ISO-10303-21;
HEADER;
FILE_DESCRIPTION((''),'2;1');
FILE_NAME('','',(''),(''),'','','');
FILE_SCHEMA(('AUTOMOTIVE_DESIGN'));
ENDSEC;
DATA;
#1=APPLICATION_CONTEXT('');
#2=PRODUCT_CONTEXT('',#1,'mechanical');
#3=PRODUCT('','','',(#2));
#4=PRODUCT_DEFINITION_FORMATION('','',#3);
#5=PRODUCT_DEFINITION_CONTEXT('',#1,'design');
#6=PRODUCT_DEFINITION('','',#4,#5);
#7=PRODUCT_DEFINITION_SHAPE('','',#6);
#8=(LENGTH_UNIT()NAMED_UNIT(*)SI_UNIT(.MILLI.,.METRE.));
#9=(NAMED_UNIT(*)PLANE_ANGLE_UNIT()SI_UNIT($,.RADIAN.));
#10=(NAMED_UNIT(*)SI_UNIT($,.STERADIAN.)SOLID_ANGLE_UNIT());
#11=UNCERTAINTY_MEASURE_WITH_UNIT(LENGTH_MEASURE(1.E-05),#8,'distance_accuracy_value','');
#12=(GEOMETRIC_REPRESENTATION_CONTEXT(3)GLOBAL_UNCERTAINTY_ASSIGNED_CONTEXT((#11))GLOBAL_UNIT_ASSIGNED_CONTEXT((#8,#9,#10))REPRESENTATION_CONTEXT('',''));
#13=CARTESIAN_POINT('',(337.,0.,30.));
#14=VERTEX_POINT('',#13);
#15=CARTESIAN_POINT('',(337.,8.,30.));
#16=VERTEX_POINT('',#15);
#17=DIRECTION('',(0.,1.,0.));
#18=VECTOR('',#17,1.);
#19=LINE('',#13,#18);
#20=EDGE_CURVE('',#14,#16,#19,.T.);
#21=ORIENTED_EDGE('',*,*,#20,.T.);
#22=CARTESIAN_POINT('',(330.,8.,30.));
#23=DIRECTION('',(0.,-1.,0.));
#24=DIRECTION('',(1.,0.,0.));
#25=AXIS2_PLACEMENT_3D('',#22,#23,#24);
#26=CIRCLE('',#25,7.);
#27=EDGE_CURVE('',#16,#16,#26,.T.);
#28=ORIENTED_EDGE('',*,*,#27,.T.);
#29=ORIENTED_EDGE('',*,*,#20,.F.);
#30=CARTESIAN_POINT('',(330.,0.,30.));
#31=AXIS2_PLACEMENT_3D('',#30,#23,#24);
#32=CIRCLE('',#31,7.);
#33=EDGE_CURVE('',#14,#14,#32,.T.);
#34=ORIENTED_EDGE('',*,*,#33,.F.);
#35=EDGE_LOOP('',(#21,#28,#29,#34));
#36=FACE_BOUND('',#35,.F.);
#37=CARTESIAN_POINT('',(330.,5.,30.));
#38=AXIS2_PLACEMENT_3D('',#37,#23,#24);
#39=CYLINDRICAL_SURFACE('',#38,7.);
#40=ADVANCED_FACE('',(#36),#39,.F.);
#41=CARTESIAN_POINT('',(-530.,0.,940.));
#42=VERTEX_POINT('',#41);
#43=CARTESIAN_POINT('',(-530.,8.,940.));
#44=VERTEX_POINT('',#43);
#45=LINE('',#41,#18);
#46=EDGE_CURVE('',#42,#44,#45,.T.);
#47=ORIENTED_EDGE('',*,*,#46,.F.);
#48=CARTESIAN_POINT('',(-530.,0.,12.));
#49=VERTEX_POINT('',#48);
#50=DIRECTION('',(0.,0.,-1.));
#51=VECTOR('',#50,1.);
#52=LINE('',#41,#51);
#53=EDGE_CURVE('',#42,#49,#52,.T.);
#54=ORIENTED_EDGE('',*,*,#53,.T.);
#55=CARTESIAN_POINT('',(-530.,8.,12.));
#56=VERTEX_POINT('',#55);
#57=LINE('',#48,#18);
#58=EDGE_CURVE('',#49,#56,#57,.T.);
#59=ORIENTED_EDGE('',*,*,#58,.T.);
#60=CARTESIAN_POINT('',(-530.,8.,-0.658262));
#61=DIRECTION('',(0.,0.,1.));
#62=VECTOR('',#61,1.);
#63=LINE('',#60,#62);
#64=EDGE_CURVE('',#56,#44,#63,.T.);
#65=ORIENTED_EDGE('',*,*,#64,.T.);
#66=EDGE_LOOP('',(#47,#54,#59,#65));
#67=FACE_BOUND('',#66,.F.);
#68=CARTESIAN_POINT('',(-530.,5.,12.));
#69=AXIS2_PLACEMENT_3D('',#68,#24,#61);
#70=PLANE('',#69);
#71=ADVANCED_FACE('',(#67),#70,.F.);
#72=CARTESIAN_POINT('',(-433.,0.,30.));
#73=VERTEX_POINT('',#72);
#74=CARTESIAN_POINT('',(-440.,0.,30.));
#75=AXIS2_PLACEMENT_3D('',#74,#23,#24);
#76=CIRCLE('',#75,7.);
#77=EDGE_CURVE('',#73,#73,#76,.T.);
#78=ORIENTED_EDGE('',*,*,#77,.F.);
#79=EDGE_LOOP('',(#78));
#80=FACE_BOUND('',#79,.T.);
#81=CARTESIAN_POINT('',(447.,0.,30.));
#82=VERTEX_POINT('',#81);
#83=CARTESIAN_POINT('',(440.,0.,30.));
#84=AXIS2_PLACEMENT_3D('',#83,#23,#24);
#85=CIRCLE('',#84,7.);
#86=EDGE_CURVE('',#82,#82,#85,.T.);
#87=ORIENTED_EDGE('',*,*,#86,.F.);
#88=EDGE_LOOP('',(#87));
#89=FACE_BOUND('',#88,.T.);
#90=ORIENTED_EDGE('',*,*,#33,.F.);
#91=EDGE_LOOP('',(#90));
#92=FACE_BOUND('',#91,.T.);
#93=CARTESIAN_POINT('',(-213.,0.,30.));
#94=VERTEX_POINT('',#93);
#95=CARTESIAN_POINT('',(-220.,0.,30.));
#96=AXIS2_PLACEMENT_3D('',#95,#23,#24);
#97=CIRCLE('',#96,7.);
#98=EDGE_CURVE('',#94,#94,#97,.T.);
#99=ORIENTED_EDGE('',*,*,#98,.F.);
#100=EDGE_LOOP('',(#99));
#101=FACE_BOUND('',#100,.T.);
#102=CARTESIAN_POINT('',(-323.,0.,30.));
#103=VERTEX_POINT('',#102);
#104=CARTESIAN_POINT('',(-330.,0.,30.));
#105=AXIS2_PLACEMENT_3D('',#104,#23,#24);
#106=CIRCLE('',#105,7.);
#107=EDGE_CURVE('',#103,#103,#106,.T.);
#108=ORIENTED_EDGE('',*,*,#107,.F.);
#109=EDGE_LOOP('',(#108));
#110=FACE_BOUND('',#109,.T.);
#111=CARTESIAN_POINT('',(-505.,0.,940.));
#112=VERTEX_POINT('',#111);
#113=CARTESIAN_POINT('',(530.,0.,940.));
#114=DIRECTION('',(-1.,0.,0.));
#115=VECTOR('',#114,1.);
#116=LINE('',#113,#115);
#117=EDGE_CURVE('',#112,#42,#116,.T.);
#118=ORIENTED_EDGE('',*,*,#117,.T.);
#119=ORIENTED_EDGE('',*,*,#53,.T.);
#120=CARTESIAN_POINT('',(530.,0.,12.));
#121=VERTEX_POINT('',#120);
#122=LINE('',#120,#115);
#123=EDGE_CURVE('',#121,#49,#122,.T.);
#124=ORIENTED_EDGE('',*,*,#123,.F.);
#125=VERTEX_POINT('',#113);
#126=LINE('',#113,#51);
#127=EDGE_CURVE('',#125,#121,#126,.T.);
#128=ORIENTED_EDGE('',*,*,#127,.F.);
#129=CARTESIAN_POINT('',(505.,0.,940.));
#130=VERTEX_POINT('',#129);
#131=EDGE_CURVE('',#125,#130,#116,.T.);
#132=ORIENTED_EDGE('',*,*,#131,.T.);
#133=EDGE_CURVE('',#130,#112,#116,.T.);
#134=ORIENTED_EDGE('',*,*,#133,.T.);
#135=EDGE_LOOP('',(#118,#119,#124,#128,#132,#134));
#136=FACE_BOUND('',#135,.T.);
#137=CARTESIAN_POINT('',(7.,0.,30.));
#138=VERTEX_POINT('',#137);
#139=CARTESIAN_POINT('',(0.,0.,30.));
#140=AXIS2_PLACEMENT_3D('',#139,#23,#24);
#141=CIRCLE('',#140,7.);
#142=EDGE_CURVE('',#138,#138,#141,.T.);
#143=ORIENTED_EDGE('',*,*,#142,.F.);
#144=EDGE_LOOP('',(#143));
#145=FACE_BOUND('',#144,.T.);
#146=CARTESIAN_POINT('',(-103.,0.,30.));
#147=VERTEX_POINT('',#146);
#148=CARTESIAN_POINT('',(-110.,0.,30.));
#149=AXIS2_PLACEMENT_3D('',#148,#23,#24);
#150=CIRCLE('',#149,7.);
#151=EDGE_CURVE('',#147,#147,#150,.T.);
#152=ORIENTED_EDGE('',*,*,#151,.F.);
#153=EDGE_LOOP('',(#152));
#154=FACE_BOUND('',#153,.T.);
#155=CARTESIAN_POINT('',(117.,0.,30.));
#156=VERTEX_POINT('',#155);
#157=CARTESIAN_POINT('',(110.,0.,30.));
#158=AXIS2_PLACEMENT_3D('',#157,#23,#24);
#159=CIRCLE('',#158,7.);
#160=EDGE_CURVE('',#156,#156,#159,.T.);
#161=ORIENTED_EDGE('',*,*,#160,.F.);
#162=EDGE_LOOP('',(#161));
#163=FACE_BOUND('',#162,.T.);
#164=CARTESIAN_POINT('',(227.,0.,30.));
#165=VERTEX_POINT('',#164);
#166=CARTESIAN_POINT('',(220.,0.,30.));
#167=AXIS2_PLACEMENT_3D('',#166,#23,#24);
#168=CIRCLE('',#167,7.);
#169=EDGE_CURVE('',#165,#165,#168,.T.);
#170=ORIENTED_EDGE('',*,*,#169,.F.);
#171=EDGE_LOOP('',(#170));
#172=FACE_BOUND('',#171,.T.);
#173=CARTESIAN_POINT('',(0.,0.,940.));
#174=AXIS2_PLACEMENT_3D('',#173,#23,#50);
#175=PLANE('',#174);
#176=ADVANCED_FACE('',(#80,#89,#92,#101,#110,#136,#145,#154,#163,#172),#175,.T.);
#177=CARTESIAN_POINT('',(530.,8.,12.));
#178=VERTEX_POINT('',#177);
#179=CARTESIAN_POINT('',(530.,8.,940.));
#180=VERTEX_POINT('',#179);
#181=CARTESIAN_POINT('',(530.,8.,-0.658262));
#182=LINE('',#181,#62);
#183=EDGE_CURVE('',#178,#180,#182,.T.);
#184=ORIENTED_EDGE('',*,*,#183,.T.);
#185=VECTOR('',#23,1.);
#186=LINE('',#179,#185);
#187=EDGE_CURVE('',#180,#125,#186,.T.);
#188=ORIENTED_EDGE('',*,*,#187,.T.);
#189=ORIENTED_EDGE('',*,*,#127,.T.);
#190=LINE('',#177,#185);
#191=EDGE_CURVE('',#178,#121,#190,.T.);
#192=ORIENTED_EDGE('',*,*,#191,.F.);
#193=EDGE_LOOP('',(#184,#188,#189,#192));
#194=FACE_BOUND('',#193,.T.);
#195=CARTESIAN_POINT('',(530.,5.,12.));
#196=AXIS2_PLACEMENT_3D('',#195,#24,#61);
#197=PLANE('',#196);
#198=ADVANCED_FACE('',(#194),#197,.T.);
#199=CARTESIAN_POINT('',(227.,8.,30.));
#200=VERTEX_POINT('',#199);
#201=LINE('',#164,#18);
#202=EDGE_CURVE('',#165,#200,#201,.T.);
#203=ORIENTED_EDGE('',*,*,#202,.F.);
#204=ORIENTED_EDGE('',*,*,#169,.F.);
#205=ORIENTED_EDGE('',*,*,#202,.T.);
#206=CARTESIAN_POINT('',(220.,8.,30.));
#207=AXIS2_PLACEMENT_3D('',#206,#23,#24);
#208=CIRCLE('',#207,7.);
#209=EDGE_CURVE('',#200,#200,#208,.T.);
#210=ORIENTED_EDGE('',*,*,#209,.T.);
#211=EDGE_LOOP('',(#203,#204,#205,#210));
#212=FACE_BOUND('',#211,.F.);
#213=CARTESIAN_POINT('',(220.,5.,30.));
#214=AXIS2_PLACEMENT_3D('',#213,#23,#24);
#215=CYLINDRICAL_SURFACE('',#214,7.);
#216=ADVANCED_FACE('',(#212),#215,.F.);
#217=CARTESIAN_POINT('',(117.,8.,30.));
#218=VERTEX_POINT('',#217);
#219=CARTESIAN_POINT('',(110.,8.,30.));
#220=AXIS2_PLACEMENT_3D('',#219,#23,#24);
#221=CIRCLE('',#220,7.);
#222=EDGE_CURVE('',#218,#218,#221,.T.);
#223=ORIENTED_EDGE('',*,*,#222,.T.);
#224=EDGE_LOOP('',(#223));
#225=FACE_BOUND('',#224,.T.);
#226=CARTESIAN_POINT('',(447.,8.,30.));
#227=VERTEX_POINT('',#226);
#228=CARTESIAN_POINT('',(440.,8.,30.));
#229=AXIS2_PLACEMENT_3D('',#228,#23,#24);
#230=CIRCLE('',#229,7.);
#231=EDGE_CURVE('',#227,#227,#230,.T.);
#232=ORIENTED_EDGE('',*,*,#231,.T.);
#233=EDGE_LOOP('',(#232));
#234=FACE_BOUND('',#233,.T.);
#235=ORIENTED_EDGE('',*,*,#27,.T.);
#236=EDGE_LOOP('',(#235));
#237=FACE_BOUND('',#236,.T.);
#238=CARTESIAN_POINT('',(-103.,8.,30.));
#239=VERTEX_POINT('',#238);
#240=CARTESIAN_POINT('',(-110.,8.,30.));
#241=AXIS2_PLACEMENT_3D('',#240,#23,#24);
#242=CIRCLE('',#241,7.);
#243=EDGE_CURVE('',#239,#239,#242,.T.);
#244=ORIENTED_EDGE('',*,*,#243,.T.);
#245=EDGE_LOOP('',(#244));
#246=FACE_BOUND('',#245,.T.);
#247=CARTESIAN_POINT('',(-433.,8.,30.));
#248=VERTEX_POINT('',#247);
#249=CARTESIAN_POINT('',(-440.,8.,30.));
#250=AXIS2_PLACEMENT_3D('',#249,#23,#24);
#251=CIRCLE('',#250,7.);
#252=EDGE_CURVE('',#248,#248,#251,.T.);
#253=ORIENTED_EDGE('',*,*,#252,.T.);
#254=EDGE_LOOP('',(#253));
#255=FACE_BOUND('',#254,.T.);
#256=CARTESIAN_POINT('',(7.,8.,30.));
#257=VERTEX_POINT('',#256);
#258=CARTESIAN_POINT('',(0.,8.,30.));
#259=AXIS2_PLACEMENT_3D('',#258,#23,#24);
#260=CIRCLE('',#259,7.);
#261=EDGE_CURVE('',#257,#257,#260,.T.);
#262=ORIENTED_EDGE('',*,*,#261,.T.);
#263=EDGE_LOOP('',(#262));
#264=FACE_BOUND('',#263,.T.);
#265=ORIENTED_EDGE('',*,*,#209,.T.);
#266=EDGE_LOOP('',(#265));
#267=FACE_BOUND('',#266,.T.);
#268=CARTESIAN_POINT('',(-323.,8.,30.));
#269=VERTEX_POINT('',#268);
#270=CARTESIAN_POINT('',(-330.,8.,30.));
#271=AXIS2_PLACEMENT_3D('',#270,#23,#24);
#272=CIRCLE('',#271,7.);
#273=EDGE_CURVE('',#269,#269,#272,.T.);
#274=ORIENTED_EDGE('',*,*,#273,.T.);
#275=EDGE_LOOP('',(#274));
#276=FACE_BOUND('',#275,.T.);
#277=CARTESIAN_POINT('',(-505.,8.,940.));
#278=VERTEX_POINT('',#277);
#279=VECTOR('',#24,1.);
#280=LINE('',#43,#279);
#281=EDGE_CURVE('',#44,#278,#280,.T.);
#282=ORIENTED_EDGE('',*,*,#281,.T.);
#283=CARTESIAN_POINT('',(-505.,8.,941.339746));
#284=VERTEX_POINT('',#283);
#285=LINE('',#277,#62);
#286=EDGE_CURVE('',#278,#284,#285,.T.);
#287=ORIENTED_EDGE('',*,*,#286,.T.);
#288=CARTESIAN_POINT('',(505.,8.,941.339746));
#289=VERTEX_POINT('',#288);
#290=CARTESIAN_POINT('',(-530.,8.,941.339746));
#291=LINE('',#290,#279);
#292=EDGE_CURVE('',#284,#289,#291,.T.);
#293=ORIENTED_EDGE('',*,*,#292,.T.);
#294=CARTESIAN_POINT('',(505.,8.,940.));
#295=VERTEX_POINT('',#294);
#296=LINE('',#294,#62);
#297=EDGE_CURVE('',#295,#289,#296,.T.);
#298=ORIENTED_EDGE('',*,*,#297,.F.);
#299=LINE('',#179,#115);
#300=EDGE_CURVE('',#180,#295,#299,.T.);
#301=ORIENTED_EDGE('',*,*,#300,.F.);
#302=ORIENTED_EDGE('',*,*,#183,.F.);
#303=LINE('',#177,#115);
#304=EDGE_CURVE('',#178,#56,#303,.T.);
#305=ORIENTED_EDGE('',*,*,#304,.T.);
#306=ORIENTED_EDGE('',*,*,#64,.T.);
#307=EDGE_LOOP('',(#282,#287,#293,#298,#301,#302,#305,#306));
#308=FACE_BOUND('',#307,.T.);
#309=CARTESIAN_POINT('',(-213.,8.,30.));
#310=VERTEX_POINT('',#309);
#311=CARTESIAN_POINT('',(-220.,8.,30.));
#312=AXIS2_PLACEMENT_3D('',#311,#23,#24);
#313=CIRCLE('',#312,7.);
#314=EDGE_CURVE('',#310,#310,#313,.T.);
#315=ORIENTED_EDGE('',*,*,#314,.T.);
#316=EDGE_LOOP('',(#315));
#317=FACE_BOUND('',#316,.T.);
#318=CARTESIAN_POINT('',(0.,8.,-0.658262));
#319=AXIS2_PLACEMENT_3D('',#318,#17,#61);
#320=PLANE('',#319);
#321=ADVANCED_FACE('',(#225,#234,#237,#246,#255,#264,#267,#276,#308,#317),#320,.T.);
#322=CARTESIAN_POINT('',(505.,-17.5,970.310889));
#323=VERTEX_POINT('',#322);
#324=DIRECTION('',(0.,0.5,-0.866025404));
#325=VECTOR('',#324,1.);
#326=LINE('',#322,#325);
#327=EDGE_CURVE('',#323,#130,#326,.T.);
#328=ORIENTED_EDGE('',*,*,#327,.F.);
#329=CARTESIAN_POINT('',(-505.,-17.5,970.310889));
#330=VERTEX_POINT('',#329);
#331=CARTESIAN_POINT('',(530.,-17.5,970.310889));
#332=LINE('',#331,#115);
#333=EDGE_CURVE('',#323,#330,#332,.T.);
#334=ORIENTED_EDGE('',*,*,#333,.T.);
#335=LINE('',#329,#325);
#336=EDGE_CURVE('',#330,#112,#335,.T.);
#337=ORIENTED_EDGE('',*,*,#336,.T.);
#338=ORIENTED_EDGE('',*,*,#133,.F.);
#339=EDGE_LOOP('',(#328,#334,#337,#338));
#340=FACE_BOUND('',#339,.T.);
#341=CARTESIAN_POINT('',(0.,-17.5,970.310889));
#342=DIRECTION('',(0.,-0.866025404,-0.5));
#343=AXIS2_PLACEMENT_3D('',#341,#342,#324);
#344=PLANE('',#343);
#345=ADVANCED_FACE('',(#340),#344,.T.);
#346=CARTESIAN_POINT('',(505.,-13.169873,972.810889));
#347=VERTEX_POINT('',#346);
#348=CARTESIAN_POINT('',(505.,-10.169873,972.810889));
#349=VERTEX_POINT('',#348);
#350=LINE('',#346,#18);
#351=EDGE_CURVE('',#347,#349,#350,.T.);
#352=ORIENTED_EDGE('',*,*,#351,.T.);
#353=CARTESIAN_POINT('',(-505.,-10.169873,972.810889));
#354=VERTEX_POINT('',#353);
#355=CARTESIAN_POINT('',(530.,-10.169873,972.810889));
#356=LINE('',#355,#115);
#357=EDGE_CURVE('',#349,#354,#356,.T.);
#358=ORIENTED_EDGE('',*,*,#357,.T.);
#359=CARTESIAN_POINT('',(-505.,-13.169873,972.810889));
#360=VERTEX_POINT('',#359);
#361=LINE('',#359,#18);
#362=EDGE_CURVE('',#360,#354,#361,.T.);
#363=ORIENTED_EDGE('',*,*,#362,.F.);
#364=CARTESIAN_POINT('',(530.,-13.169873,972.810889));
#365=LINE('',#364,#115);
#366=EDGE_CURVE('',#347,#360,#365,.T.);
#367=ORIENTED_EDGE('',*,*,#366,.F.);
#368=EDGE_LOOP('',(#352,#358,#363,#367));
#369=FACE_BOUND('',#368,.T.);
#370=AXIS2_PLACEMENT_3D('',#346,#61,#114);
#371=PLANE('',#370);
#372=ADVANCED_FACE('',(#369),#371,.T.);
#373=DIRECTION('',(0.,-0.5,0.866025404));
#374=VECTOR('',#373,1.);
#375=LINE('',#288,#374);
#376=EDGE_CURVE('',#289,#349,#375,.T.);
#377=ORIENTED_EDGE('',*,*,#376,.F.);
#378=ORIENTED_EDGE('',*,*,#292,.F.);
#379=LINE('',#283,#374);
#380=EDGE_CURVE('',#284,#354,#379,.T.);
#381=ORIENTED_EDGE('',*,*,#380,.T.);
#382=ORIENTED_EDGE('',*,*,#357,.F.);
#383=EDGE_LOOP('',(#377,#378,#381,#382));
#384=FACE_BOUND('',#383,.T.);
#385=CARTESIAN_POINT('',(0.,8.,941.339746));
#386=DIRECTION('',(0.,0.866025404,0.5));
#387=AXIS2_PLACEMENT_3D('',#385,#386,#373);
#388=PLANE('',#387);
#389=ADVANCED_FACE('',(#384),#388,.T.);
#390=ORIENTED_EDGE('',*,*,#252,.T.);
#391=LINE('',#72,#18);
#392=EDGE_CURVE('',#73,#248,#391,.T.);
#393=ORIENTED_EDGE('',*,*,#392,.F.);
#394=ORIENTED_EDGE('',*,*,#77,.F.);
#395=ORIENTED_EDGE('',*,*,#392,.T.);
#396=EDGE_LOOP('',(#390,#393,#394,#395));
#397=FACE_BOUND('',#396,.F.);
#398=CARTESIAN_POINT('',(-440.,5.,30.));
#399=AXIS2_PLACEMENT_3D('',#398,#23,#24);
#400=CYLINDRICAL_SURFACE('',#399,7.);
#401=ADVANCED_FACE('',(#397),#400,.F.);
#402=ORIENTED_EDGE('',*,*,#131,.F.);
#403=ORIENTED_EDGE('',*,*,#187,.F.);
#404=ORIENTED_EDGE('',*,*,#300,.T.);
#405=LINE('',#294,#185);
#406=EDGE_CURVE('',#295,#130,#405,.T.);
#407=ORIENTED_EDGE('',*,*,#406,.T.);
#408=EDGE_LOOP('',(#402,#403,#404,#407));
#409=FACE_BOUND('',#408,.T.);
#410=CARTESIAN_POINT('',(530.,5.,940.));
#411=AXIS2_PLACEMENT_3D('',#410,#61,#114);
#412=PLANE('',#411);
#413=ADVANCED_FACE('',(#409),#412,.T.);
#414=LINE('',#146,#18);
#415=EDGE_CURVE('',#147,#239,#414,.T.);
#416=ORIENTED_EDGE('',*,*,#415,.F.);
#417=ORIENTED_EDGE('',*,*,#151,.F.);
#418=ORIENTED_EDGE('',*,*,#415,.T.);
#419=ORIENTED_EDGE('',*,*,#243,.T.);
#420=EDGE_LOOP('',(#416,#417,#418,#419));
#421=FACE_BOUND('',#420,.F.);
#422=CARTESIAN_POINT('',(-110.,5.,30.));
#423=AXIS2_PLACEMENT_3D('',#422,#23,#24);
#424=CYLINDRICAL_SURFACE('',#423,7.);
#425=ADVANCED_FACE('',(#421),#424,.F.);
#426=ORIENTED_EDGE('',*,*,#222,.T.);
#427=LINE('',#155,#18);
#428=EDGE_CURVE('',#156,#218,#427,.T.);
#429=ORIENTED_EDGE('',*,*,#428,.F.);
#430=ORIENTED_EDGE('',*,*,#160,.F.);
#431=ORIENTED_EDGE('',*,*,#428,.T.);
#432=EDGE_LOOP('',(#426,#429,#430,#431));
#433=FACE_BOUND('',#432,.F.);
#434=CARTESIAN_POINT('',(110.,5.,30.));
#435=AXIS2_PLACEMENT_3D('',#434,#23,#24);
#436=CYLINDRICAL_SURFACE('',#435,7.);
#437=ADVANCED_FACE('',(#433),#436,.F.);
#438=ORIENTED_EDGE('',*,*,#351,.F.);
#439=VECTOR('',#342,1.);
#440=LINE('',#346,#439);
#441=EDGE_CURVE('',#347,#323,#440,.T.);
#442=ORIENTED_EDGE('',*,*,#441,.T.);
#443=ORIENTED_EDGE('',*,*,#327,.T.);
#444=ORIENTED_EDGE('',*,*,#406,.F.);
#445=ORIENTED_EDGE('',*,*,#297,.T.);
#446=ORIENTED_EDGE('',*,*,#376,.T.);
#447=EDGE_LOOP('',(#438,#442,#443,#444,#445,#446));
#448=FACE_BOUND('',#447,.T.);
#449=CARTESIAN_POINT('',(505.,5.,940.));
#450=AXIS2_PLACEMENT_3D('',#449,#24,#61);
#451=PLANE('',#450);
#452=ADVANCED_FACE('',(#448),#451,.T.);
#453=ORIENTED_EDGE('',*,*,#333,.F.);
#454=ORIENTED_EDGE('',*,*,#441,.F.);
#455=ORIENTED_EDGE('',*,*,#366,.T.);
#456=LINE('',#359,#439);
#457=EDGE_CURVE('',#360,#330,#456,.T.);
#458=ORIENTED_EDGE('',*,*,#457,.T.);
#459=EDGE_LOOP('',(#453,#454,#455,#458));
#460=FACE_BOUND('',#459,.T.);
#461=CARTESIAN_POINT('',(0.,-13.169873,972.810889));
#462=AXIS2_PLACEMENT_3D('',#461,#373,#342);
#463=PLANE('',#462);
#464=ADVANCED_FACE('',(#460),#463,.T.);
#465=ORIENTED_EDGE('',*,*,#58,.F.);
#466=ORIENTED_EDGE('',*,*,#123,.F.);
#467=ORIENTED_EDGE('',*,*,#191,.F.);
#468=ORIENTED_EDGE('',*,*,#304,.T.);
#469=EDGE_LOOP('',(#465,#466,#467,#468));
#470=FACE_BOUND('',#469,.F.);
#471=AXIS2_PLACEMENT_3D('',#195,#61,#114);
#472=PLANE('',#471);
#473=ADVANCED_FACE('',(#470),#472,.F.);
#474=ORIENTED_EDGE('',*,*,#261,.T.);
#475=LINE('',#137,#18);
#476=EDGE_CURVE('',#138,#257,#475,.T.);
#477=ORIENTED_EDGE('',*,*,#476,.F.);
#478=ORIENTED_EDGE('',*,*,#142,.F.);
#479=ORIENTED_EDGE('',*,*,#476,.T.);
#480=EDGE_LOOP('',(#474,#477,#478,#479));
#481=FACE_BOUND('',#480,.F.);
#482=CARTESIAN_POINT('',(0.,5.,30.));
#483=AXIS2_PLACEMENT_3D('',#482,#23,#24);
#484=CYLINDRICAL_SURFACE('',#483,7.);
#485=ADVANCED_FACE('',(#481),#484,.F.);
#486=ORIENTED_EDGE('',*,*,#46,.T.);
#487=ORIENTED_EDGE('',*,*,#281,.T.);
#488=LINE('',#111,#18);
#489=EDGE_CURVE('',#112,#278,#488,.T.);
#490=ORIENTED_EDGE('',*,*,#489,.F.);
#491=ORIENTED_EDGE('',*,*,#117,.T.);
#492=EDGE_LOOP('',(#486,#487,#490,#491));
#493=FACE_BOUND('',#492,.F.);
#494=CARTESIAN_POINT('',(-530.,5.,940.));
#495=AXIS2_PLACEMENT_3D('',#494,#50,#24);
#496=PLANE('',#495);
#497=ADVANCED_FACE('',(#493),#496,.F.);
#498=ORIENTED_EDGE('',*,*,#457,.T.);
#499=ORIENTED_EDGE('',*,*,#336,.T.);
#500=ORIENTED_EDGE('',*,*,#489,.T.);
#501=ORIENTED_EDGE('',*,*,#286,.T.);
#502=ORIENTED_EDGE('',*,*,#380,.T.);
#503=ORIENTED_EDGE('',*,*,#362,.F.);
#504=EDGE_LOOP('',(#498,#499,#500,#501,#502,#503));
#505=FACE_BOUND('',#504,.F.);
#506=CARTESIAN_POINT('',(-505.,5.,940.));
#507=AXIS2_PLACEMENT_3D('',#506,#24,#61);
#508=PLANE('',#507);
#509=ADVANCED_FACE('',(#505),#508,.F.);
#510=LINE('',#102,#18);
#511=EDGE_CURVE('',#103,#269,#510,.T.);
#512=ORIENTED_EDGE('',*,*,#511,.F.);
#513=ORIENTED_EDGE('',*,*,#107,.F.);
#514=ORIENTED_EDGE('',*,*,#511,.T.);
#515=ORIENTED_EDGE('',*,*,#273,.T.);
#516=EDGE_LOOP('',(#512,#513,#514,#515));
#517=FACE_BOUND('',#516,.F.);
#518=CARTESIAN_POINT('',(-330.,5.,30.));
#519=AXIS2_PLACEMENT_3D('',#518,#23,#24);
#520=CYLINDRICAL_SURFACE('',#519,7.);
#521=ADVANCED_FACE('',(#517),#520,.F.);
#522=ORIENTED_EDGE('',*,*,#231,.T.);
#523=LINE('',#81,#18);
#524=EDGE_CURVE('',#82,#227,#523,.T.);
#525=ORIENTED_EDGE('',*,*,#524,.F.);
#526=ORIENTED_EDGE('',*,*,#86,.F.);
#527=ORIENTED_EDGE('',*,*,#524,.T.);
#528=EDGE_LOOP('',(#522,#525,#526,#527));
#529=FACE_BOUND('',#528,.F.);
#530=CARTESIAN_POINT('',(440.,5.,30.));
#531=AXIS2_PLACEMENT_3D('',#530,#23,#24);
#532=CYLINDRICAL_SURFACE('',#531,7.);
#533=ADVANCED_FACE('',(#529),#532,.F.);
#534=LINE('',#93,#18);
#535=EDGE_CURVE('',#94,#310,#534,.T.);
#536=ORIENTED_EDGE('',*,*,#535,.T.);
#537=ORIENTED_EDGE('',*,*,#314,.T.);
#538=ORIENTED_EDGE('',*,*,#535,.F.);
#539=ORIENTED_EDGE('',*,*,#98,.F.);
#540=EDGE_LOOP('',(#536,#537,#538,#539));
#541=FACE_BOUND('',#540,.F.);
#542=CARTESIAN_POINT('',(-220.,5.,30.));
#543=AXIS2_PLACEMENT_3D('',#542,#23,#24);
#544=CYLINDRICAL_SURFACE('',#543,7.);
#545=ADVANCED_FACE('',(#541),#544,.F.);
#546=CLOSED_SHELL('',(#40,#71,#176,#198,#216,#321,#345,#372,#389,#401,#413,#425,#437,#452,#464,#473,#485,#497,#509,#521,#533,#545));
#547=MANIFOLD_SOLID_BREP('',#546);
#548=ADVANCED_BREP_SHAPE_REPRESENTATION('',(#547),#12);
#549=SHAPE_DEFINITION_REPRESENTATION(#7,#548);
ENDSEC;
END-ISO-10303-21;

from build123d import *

# Parameters (mm, degrees)
F1_DEPTH = 530
F3_DEPTH = 25
F4_R     = 7
F5_DEPTH = 5.001
F7_DEPTH = 1060.001
F8_DEPTH = 3


# Not quite as in the source:
# - a pattern or mirror of a feature is missing from the dataset's text; its kind, count and spacing are read off the source's solid


with BuildPart() as f1:
    # F0 (on Right) → F1 (new body, symmetric)
    with BuildSketch(Plane.YZ):
        Polygon((0, 940), (0, 0), (-6.4704761276, -24.1481456572), (-1.6408469961, -25.4422408827), (5, -0.6582624879), (5, 941.3397459622), (-13.1698729811, 972.8108891325), (-17.5, 970.3108891325), align=None)
    extrude(amount=F1_DEPTH, both=True)

    # F2 (on face) → F3 (cut)
    with BuildSketch(Plane.YZ.offset(530)):
        Polygon((5, 0), (0, 0), (-6.4704761276, -24.1481456572), (-1.6408469961, -25.4422408827), (5, -0.6582624879), align=None)
        Polygon((-17.5, 970.3108891325), (0, 940), (5, 940), (5, 941.3397459622), (-13.1698729811, 972.8108891325), align=None)
    f3 = extrude(amount=-F3_DEPTH, mode=Mode.SUBTRACT)

    # F3_copies: F3 across plane
    add(f3.mirror(Plane(origin=(0, 0, 0), x_dir=(0, 0, -1), z_dir=(-1, 0, 0))), mode=Mode.SUBTRACT)

    # F4 (on face) → F5 (cut, through all)
    with BuildSketch(Plane.XZ):
        with Locations((0, 30)):
            Circle(F4_R)
        with Locations((110, 30)):
            Circle(F4_R)
        with Locations((220, 30)):
            Circle(F4_R)
        with Locations((330, 30)):
            Circle(F4_R)
        with Locations((440, 30)):
            Circle(F4_R)
        with Locations((-110, 30)):
            Circle(F4_R)
        with Locations((-220, 30)):
            Circle(F4_R)
        with Locations((-330, 30)):
            Circle(F4_R)
        with Locations((-440, 30)):
            Circle(F4_R)
    extrude(amount=-F5_DEPTH, mode=Mode.SUBTRACT)

    # F6 (on face) → F7 (cut, through all)
    with BuildSketch(Plane.YZ.offset(530)):
        Polygon((0, 12), (0, 0), (-6.4704761276, -24.1481456572), (-1.6408469961, -25.4422408827), (5, -0.6582624879), (5, 12), align=None)
    extrude(amount=-F7_DEPTH, mode=Mode.SUBTRACT)

    # F8 (add): faces of the model
    f8_faces = [f1.faces().sort_by_distance(p)[0] for p in [
        (0, 5, 477.2673971314),
        (0, -4.0849364905, 957.0753175473),
    ]]
    extrude(f8_faces, amount=F8_DEPTH, dir=(0, 1, 0))


solid = f1.part
